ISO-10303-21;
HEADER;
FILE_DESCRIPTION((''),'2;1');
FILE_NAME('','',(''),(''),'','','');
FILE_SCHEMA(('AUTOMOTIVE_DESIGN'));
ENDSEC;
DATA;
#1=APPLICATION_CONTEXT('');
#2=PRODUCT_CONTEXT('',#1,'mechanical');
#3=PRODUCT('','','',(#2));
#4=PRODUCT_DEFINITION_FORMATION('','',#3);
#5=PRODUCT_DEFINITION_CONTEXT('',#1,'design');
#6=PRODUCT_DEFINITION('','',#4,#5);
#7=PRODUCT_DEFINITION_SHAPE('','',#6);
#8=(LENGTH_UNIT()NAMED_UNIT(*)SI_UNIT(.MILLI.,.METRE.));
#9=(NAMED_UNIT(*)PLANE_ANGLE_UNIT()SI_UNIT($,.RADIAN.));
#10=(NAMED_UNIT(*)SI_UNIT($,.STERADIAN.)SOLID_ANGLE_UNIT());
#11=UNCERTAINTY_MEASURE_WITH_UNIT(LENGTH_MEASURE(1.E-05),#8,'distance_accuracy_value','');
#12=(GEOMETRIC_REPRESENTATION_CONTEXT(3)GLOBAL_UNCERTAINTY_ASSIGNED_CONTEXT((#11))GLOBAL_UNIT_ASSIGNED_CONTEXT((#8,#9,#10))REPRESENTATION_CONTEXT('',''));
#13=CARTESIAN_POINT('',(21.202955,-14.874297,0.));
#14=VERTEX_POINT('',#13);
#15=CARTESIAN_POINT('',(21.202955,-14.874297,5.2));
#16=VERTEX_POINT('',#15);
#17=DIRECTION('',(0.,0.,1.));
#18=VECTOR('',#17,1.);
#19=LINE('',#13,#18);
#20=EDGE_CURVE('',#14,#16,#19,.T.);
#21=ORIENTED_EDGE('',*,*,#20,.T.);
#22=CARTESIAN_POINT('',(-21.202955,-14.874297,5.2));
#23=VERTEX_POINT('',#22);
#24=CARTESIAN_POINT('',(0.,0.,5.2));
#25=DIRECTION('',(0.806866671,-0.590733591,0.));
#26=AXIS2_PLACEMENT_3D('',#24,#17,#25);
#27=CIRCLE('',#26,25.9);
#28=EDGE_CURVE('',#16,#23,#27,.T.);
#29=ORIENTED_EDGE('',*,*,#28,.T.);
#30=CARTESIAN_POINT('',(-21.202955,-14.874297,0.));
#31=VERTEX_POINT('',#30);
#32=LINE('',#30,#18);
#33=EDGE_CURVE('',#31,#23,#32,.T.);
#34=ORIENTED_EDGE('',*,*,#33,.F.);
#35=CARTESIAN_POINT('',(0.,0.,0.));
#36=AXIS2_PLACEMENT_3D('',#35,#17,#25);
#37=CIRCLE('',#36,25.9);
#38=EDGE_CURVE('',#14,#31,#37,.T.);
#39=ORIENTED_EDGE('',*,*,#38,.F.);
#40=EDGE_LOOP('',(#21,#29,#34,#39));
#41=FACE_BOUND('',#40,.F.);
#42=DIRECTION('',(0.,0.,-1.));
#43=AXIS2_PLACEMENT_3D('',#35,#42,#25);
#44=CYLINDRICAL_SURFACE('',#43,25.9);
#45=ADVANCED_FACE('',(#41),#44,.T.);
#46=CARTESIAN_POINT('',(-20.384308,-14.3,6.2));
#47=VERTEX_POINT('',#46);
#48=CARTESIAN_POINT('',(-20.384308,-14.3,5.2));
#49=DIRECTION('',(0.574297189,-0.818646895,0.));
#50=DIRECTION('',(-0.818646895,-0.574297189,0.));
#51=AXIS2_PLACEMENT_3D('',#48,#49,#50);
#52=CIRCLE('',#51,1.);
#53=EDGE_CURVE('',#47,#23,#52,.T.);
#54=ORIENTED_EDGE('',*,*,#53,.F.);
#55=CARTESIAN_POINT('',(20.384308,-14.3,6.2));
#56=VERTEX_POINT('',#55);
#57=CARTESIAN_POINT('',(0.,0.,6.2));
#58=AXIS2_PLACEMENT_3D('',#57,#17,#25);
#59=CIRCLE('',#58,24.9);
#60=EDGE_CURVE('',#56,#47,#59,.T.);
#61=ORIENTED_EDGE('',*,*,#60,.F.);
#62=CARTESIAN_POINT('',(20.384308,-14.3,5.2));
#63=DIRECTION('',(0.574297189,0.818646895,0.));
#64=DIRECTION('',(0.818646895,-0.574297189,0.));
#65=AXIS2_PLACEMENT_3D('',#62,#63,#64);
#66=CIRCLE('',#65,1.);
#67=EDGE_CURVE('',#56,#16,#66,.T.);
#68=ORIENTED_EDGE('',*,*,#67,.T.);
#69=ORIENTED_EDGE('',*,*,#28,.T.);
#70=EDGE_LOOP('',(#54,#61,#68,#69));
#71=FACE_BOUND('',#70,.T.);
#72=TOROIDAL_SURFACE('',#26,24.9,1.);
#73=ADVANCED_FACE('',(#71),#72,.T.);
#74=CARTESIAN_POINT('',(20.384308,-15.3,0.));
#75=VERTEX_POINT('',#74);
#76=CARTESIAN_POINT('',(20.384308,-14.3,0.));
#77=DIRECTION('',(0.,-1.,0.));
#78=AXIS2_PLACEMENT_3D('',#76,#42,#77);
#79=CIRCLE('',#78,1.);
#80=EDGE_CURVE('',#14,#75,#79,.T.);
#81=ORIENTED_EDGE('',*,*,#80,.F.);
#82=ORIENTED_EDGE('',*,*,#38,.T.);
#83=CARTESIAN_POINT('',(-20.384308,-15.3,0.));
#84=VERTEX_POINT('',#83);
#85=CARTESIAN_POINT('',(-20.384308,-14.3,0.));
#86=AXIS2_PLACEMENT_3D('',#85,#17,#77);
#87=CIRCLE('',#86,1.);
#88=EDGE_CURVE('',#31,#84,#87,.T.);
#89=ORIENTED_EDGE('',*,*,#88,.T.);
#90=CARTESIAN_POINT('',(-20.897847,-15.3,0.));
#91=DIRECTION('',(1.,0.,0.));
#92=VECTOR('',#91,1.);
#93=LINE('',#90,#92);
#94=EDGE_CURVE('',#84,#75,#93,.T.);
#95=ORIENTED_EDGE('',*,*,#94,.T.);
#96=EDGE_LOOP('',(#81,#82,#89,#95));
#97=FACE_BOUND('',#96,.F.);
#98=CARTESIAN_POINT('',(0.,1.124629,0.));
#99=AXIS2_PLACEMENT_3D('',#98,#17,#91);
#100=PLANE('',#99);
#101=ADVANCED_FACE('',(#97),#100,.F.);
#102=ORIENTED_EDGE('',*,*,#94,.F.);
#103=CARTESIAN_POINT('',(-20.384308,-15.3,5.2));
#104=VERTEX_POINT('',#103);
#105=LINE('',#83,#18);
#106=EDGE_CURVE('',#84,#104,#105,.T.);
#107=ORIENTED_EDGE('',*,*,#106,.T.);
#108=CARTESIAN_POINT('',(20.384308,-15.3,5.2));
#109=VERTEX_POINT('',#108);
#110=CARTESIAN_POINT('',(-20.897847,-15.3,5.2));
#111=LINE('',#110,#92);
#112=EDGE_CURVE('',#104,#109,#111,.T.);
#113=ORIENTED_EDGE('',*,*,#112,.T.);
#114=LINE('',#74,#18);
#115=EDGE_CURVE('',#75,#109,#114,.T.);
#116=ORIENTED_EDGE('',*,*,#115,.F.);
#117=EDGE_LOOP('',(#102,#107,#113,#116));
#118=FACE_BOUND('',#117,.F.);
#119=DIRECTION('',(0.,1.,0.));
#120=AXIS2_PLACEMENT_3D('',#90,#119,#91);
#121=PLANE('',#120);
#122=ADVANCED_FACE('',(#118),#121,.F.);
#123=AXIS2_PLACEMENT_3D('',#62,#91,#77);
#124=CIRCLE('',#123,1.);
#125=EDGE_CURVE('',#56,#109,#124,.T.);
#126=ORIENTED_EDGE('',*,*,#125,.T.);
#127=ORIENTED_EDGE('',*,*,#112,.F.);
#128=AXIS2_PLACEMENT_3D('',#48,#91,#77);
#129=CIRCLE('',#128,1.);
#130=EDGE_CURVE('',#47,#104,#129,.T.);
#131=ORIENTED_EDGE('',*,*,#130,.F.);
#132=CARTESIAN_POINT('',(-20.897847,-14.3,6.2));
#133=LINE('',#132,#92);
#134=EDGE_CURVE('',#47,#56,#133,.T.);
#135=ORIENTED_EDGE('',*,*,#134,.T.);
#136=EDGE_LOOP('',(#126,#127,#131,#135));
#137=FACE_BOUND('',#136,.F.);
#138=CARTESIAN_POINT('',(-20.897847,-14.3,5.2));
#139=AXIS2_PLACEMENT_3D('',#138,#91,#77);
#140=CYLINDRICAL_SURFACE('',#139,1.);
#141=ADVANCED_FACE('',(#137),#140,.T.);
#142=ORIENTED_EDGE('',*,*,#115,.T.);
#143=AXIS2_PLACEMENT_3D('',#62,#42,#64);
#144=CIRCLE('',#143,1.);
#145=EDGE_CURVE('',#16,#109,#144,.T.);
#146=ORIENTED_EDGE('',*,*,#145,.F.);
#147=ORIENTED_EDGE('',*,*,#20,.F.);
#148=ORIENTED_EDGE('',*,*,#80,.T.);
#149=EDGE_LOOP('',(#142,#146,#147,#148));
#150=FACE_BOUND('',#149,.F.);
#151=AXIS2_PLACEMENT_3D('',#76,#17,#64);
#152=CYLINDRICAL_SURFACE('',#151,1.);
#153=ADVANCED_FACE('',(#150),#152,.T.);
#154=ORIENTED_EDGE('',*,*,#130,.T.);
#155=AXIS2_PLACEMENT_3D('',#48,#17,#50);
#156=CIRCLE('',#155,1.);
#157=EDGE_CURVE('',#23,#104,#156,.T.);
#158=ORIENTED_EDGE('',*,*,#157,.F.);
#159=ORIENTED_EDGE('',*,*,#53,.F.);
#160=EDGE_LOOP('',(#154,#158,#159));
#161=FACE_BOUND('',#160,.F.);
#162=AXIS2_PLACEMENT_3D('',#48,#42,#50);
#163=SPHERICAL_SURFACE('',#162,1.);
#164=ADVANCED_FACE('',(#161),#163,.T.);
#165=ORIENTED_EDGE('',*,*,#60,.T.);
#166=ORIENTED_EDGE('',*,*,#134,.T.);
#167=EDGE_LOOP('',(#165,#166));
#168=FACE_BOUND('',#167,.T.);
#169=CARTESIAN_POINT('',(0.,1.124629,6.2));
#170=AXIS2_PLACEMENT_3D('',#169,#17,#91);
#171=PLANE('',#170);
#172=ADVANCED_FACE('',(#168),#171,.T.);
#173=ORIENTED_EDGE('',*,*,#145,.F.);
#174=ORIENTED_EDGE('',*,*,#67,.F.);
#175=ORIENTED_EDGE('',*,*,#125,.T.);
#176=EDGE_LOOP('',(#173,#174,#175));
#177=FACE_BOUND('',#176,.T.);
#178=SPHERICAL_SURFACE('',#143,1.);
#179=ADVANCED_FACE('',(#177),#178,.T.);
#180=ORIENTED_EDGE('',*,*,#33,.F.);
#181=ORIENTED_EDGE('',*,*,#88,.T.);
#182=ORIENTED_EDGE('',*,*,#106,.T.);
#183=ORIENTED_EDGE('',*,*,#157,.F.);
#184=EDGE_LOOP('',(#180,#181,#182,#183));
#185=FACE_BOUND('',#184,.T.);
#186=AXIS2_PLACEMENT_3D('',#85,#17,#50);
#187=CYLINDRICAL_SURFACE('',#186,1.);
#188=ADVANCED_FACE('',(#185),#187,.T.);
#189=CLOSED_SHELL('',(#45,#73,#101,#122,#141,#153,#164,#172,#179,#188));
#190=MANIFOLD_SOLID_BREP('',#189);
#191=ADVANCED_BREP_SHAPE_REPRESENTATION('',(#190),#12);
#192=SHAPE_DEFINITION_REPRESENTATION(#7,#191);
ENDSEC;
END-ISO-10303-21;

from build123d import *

# Parameters (mm, degrees)
F1_DEPTH = 6.2
F2_R     = 1


with BuildPart() as f1:
    # F0 (on Top) → F1 (new body)
    with BuildSketch(Plane.XY):
        with BuildLine():
            ThreePointArc((20.897846779, -15.3), (0, 25.9), (-20.897846779, -15.3))
            Line((-20.897846779, -15.3), (20.897846779, -15.3))
        make_face()
    extrude(amount=F1_DEPTH)

    # F2
    f2_edges = [f1.edges().sort_by_distance(p)[0] for p in [
        (-20.897847, -15.3, 3.1),
        (0, 25.9, 6.2),
        (0, -15.3, 6.2),
        (20.897847, -15.3, 3.1),
    ]]
    fillet(f2_edges, radius=F2_R)


solid = f1.part
